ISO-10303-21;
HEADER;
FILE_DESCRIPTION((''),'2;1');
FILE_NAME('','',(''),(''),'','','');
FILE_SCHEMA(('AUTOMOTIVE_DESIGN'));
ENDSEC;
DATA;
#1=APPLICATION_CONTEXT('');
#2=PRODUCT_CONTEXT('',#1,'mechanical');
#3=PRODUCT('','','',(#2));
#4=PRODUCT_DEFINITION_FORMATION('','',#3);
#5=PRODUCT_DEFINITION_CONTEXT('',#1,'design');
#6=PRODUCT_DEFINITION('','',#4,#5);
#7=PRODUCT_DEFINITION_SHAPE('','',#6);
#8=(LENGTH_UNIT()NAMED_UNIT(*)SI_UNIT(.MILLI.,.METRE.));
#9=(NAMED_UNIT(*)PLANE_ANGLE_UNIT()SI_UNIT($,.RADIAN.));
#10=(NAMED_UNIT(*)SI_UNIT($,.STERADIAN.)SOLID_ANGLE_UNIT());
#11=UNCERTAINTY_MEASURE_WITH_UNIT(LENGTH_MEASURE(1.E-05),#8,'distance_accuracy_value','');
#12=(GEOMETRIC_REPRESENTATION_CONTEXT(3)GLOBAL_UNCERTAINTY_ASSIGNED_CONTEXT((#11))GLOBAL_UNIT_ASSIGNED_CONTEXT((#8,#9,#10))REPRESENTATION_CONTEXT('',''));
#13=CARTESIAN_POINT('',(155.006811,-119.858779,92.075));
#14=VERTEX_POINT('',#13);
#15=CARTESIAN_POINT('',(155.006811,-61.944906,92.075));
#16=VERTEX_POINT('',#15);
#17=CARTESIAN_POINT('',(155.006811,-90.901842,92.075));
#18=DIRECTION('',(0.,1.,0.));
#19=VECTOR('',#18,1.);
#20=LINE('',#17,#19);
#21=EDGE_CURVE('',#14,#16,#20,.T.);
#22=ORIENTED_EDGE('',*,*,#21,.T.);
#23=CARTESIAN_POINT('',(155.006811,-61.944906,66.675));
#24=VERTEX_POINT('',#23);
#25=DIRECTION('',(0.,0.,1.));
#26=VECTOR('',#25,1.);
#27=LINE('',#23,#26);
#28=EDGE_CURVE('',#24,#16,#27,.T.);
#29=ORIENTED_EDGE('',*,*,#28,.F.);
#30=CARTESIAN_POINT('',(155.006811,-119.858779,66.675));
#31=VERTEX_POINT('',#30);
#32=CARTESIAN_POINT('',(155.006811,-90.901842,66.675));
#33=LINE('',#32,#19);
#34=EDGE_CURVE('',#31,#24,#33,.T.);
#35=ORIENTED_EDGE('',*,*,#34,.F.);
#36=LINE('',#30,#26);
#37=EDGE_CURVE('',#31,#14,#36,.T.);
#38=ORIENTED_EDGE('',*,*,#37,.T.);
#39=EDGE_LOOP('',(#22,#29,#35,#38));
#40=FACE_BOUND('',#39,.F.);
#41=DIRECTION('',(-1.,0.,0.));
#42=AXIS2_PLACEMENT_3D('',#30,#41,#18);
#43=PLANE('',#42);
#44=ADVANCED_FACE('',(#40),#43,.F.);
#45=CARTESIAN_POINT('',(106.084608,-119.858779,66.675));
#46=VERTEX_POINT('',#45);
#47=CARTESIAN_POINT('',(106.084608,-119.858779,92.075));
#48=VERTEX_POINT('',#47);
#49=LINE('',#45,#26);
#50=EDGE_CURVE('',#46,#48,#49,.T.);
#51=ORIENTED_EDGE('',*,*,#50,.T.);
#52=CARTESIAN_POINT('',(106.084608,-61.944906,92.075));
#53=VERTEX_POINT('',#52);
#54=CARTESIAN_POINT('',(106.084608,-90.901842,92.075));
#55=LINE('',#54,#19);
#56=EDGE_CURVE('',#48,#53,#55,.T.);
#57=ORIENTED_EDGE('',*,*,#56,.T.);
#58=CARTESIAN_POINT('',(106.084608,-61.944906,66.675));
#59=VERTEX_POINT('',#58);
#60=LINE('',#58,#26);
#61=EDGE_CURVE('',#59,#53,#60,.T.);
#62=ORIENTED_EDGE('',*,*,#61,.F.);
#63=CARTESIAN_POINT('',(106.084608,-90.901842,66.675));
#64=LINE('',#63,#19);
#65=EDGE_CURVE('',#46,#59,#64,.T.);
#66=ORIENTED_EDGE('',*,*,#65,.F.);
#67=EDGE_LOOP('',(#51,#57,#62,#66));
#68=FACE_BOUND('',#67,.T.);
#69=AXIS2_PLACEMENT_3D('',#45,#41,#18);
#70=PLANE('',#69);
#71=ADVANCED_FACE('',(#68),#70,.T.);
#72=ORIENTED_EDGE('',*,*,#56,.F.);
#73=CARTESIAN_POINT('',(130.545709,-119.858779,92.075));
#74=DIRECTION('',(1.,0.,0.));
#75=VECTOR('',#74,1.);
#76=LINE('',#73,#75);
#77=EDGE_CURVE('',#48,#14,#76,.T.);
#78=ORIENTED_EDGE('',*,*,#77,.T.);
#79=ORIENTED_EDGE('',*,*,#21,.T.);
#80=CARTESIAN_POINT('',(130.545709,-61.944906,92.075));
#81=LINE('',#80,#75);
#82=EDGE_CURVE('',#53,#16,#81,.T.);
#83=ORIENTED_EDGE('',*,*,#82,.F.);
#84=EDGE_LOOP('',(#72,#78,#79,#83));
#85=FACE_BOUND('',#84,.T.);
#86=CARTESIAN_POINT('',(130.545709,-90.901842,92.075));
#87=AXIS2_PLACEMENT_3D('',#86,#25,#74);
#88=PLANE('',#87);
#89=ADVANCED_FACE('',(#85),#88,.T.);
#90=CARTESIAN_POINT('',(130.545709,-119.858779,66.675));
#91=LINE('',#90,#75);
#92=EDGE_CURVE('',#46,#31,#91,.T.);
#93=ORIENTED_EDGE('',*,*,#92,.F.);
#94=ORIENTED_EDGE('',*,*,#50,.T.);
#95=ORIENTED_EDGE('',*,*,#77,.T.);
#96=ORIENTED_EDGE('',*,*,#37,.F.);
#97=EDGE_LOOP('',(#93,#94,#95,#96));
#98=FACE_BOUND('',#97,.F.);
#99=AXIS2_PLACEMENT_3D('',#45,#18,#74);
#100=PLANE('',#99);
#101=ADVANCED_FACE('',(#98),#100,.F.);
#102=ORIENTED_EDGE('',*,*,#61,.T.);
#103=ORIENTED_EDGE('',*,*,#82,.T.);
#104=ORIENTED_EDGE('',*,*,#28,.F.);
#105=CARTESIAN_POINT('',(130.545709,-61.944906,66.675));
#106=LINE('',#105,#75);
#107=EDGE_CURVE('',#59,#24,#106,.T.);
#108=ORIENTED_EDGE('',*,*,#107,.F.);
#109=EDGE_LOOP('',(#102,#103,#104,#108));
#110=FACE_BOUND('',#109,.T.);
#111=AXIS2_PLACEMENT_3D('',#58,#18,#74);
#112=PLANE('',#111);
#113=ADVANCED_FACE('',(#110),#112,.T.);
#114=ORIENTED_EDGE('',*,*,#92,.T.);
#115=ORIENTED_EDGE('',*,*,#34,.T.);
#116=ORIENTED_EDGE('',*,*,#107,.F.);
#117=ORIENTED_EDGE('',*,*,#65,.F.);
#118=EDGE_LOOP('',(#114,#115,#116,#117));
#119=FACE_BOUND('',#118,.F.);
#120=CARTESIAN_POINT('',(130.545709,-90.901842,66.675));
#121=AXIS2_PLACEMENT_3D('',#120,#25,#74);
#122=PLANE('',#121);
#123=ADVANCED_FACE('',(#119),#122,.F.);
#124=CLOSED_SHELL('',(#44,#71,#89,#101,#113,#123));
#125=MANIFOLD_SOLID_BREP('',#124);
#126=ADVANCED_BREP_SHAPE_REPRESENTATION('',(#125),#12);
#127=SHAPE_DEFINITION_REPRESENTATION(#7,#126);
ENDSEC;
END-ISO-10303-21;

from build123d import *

# Parameters (mm, degrees)
F1_DEPTH  = 63.5
F0_W      = 25.4
F0_H      = 19.05
F2_DEPTH  = 25.4
F3_DEPTH  = 7.9375
F5_R      = 5.08
F9_W      = 48.9222034812
F9_H      = 57.9138733447
F12_DEPTH = 25.4


# Not quite as in the source:
# - the program builds the solid bodies; features that only make, move or delete a surface that nothing else refers to are left out


with BuildPart() as f1:
    # F0 (on Front) → F1 (new body, symmetric)
    with BuildSketch(Plane.XZ):
        Polygon((22.225, 9.525), (-41.275, 9.525), (-41.275, -9.525), (41.275, -9.525), (41.275, 9.525), align=None)
    extrude(amount=F1_DEPTH, both=True)

    # F0 (on Front) → F2 (join, symmetric)
    with BuildSketch(Plane.XZ):
        with BuildLine():
            Line((22.225, 27.0002), (22.225, 9.525))
            Line((22.225, 9.525), (41.275, 9.525))
            Line((41.275, 9.525), (41.275, 27.0002))
            ThreePointArc((41.275, 27.0002), (45.9246798487, 38.2255201513), (57.15, 42.8752))
            Line((57.15, 42.8752), (60.325, 42.8752))
            Line((60.325, 42.8752), (60.325, 61.9252))
            Line((60.325, 61.9252), (57.15, 61.9252))
            add(Edge.make_bspline(
                [(53.8854342407, 61.7722898912), (54.9842067368, 61.8365871986), (56.0728453275, 61.8876096574), (57.15, 61.9252)],
                knots=[108.5245810491, 108.5245810491, 108.5245810491, 108.5245810491, 111.5045361635, 111.5045361635, 111.5045361635, 111.5045361635], degree=3))
            ThreePointArc((53.8854342407, 61.7722898912), (31.3258777096, 50.5133948686), (22.225, 27.0002))
        make_face()
        with Locations((73.025, 52.4002)):
            Rectangle(F0_W, F0_H)
    extrude(amount=F2_DEPTH, both=True)

    # F0 (on Front) → F3 (join, symmetric)
    with BuildSketch(Plane.XZ):
        with BuildLine():
            add(Edge.make_bspline(
                [(-41.275, 9.525), (-39.5856284224, 39.4828766469), (13.870125209, 59.4306981306), (53.8854342407, 61.7722898912)],
                knots=[0, 0, 0, 0, 108.5245810491, 108.5245810491, 108.5245810491, 108.5245810491], degree=3))
            Line((-41.275, 9.525), (22.225, 9.525))
            Line((22.225, 9.525), (22.225, 27.0002))
            ThreePointArc((22.225, 27.0002), (31.3258777096, 50.5133948686), (53.8854342407, 61.7722898912))
        make_face()
    extrude(amount=F3_DEPTH, both=True)

    # F0 (on Front) → F4 (revolve)
    with BuildSketch(Plane.XZ):
        Polygon((85.725, 66.675), (85.725, 61.9252), (85.725, 42.8752), (85.725, 38.1), (111.125, 38.1), (111.125, 66.675), align=None)
    revolve(axis=Axis((85.725, 0, 52.3875), (0, 0, 1)))

    # F5
    f5_edges = [f1.edges().sort_by_distance(p)[0] for p in [
        (41.275, -63.5, 0),
        (-41.275, -63.5, 0),
        (41.275, 63.5, 0),
        (-41.275, 63.5, 0),
    ]]
    fillet(f5_edges, radius=F5_R)


with BuildPart() as f12:
    # F9 (on face) → F12 (new body)
    with BuildSketch(Plane.XY.offset(66.675)):
        with Locations((130.5457092822, -90.9018423408)):
            Rectangle(F9_W, F9_H)
    extrude(amount=F12_DEPTH)


solid = f12.part
